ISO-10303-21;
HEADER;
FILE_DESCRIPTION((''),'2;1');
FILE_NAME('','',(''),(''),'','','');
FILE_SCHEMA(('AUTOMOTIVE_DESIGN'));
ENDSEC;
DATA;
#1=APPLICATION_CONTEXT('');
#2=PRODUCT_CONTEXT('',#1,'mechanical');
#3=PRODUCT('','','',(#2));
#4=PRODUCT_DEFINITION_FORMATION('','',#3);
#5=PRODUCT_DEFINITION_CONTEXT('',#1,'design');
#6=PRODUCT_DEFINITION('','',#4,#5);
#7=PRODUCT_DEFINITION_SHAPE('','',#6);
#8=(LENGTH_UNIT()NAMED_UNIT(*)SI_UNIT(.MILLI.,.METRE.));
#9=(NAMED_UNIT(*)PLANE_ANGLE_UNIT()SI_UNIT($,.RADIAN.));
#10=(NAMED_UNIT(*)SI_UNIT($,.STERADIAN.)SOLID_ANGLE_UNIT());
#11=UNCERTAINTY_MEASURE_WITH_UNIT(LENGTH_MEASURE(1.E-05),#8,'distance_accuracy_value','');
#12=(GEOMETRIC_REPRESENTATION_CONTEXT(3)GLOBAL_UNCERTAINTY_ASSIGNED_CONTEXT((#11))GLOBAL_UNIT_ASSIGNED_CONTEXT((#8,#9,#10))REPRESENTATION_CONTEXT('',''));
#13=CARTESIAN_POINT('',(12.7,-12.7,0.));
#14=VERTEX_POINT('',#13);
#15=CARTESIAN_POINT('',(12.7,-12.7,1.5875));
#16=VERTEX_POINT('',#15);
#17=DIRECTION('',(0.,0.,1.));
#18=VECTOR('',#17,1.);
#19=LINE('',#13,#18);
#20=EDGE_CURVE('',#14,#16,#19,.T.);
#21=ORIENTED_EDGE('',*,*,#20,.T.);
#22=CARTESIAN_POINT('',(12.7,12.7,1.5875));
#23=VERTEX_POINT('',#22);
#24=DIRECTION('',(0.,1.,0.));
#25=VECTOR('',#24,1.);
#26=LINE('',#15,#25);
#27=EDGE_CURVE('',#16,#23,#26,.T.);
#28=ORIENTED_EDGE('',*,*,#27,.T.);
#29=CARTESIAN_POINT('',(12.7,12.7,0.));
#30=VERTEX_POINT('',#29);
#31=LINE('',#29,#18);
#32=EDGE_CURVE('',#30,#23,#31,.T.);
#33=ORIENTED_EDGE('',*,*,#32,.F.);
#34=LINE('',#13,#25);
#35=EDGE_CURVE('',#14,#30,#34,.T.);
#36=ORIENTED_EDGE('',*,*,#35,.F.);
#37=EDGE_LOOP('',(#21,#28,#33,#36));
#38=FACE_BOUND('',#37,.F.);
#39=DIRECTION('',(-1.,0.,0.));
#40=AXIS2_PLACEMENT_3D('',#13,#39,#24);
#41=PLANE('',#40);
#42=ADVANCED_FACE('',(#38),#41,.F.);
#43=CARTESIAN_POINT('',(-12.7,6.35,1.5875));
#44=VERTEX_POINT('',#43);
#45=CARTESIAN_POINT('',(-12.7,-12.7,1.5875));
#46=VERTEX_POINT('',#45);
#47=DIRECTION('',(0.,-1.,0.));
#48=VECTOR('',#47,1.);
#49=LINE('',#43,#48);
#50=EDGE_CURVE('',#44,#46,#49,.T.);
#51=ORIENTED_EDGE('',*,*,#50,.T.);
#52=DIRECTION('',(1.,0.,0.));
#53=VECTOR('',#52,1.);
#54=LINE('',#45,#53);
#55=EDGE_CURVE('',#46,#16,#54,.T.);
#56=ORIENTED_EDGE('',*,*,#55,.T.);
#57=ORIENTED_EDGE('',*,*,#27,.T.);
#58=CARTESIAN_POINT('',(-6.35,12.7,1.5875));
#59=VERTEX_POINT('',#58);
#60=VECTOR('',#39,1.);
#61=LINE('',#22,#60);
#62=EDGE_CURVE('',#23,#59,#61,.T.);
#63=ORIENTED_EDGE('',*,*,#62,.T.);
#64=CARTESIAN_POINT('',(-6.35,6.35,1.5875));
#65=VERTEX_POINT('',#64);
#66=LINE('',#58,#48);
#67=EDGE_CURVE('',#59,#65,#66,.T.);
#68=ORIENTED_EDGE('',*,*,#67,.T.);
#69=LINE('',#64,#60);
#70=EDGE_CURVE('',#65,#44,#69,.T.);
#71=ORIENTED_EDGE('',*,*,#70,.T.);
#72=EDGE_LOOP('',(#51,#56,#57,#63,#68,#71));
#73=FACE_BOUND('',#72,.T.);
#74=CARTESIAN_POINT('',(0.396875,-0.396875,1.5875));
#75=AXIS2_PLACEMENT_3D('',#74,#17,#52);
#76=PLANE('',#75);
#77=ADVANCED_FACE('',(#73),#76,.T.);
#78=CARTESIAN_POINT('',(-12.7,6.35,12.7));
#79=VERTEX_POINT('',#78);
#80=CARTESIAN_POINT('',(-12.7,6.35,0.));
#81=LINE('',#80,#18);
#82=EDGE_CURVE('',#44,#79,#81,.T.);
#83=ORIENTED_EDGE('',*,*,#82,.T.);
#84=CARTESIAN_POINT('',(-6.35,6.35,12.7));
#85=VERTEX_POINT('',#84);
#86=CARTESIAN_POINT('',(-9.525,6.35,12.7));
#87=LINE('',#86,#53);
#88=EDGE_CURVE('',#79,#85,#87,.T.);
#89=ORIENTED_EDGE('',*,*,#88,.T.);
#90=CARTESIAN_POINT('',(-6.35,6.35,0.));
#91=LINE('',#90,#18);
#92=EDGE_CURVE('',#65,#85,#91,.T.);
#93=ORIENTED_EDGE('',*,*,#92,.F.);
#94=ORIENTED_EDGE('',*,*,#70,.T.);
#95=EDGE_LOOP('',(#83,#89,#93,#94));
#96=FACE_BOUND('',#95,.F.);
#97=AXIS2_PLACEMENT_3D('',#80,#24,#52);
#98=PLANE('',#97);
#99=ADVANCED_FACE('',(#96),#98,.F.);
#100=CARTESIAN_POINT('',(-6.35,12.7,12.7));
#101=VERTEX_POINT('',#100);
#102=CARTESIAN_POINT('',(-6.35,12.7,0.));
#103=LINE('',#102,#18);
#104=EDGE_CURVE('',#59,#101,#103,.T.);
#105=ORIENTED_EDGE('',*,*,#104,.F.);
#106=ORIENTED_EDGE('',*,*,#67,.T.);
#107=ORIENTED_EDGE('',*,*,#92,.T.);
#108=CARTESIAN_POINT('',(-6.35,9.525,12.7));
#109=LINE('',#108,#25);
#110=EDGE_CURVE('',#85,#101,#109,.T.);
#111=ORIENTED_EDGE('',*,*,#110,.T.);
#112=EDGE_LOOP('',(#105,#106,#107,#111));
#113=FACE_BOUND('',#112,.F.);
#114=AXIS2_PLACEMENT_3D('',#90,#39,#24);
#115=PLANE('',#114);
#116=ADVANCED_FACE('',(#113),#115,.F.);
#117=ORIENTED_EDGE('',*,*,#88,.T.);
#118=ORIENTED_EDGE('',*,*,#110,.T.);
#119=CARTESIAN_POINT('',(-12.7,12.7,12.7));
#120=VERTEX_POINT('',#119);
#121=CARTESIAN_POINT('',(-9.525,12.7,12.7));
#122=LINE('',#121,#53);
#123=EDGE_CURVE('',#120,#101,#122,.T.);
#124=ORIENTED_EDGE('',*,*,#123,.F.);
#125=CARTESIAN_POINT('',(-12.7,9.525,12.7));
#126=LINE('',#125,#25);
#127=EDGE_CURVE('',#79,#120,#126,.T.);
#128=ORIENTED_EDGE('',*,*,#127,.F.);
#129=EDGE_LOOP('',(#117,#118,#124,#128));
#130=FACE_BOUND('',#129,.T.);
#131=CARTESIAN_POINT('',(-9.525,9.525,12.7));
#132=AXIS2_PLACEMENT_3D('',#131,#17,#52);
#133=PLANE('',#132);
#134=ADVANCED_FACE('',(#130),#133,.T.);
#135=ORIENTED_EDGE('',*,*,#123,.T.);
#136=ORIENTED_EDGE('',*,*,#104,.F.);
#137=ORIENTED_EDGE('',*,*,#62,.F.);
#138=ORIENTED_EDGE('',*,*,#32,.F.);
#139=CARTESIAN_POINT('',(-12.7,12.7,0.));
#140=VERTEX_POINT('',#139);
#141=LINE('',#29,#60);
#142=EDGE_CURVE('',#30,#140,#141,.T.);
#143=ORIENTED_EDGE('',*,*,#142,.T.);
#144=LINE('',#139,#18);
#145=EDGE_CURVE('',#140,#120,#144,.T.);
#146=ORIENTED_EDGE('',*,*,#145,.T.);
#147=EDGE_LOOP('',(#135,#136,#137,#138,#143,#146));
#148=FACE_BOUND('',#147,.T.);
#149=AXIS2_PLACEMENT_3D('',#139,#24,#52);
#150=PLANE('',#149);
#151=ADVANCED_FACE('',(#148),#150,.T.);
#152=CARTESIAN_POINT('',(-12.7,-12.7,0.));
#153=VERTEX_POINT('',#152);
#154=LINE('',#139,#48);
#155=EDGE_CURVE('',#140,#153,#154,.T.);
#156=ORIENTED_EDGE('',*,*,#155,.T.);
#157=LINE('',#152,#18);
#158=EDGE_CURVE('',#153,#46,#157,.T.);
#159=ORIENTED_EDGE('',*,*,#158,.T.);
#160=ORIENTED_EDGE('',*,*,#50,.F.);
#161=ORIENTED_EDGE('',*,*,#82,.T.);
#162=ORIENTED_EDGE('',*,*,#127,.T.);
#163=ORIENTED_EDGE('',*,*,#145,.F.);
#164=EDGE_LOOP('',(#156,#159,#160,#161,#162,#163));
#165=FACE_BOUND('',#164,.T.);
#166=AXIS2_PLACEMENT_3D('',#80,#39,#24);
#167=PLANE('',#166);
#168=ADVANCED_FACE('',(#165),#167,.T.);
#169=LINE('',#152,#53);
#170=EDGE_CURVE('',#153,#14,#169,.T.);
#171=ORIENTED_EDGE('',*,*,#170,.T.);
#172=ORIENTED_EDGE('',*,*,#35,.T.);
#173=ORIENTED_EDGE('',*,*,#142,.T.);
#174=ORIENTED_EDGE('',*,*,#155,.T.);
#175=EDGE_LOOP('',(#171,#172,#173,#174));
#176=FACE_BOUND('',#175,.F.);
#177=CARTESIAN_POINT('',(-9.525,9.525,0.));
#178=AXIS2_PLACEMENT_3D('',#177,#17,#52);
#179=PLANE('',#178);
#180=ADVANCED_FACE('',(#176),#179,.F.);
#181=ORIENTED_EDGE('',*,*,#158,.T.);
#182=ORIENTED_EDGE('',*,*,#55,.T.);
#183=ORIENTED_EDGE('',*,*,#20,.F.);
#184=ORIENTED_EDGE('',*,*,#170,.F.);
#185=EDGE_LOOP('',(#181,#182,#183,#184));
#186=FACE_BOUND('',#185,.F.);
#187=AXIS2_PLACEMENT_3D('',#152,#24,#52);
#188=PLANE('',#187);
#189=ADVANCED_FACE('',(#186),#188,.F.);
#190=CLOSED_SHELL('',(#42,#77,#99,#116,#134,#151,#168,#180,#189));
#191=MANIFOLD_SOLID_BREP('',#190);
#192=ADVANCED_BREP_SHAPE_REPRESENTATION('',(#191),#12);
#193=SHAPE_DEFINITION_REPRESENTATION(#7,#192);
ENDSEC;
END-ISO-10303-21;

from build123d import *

# Parameters (mm, degrees)
F1_DEPTH = 1.5875
F0_W     = 6.35
F0_H     = 6.35
F2_DEPTH = 12.7


# Not quite as in the source:
# - a length typed as a fraction of an inch, garbled in the dataset ("3 / 203.2 mm" for 3/8 in), is restored


with BuildPart() as f1:
    # F0 (on Top) → F1 (new body)
    with BuildSketch(Plane.XY):
        Polygon((-12.7, -12.7), (12.7, -12.7), (12.7, 12.7), (-6.35, 12.7), (-6.35, 6.35), (-12.7, 6.35), align=None)
    extrude(amount=F1_DEPTH)

    # F0 (on Top) → F2 (join)
    with BuildSketch(Plane.XY):
        with Locations((-9.525, 9.525)):
            Rectangle(F0_W, F0_H)
    extrude(amount=F2_DEPTH)


solid = f1.part
